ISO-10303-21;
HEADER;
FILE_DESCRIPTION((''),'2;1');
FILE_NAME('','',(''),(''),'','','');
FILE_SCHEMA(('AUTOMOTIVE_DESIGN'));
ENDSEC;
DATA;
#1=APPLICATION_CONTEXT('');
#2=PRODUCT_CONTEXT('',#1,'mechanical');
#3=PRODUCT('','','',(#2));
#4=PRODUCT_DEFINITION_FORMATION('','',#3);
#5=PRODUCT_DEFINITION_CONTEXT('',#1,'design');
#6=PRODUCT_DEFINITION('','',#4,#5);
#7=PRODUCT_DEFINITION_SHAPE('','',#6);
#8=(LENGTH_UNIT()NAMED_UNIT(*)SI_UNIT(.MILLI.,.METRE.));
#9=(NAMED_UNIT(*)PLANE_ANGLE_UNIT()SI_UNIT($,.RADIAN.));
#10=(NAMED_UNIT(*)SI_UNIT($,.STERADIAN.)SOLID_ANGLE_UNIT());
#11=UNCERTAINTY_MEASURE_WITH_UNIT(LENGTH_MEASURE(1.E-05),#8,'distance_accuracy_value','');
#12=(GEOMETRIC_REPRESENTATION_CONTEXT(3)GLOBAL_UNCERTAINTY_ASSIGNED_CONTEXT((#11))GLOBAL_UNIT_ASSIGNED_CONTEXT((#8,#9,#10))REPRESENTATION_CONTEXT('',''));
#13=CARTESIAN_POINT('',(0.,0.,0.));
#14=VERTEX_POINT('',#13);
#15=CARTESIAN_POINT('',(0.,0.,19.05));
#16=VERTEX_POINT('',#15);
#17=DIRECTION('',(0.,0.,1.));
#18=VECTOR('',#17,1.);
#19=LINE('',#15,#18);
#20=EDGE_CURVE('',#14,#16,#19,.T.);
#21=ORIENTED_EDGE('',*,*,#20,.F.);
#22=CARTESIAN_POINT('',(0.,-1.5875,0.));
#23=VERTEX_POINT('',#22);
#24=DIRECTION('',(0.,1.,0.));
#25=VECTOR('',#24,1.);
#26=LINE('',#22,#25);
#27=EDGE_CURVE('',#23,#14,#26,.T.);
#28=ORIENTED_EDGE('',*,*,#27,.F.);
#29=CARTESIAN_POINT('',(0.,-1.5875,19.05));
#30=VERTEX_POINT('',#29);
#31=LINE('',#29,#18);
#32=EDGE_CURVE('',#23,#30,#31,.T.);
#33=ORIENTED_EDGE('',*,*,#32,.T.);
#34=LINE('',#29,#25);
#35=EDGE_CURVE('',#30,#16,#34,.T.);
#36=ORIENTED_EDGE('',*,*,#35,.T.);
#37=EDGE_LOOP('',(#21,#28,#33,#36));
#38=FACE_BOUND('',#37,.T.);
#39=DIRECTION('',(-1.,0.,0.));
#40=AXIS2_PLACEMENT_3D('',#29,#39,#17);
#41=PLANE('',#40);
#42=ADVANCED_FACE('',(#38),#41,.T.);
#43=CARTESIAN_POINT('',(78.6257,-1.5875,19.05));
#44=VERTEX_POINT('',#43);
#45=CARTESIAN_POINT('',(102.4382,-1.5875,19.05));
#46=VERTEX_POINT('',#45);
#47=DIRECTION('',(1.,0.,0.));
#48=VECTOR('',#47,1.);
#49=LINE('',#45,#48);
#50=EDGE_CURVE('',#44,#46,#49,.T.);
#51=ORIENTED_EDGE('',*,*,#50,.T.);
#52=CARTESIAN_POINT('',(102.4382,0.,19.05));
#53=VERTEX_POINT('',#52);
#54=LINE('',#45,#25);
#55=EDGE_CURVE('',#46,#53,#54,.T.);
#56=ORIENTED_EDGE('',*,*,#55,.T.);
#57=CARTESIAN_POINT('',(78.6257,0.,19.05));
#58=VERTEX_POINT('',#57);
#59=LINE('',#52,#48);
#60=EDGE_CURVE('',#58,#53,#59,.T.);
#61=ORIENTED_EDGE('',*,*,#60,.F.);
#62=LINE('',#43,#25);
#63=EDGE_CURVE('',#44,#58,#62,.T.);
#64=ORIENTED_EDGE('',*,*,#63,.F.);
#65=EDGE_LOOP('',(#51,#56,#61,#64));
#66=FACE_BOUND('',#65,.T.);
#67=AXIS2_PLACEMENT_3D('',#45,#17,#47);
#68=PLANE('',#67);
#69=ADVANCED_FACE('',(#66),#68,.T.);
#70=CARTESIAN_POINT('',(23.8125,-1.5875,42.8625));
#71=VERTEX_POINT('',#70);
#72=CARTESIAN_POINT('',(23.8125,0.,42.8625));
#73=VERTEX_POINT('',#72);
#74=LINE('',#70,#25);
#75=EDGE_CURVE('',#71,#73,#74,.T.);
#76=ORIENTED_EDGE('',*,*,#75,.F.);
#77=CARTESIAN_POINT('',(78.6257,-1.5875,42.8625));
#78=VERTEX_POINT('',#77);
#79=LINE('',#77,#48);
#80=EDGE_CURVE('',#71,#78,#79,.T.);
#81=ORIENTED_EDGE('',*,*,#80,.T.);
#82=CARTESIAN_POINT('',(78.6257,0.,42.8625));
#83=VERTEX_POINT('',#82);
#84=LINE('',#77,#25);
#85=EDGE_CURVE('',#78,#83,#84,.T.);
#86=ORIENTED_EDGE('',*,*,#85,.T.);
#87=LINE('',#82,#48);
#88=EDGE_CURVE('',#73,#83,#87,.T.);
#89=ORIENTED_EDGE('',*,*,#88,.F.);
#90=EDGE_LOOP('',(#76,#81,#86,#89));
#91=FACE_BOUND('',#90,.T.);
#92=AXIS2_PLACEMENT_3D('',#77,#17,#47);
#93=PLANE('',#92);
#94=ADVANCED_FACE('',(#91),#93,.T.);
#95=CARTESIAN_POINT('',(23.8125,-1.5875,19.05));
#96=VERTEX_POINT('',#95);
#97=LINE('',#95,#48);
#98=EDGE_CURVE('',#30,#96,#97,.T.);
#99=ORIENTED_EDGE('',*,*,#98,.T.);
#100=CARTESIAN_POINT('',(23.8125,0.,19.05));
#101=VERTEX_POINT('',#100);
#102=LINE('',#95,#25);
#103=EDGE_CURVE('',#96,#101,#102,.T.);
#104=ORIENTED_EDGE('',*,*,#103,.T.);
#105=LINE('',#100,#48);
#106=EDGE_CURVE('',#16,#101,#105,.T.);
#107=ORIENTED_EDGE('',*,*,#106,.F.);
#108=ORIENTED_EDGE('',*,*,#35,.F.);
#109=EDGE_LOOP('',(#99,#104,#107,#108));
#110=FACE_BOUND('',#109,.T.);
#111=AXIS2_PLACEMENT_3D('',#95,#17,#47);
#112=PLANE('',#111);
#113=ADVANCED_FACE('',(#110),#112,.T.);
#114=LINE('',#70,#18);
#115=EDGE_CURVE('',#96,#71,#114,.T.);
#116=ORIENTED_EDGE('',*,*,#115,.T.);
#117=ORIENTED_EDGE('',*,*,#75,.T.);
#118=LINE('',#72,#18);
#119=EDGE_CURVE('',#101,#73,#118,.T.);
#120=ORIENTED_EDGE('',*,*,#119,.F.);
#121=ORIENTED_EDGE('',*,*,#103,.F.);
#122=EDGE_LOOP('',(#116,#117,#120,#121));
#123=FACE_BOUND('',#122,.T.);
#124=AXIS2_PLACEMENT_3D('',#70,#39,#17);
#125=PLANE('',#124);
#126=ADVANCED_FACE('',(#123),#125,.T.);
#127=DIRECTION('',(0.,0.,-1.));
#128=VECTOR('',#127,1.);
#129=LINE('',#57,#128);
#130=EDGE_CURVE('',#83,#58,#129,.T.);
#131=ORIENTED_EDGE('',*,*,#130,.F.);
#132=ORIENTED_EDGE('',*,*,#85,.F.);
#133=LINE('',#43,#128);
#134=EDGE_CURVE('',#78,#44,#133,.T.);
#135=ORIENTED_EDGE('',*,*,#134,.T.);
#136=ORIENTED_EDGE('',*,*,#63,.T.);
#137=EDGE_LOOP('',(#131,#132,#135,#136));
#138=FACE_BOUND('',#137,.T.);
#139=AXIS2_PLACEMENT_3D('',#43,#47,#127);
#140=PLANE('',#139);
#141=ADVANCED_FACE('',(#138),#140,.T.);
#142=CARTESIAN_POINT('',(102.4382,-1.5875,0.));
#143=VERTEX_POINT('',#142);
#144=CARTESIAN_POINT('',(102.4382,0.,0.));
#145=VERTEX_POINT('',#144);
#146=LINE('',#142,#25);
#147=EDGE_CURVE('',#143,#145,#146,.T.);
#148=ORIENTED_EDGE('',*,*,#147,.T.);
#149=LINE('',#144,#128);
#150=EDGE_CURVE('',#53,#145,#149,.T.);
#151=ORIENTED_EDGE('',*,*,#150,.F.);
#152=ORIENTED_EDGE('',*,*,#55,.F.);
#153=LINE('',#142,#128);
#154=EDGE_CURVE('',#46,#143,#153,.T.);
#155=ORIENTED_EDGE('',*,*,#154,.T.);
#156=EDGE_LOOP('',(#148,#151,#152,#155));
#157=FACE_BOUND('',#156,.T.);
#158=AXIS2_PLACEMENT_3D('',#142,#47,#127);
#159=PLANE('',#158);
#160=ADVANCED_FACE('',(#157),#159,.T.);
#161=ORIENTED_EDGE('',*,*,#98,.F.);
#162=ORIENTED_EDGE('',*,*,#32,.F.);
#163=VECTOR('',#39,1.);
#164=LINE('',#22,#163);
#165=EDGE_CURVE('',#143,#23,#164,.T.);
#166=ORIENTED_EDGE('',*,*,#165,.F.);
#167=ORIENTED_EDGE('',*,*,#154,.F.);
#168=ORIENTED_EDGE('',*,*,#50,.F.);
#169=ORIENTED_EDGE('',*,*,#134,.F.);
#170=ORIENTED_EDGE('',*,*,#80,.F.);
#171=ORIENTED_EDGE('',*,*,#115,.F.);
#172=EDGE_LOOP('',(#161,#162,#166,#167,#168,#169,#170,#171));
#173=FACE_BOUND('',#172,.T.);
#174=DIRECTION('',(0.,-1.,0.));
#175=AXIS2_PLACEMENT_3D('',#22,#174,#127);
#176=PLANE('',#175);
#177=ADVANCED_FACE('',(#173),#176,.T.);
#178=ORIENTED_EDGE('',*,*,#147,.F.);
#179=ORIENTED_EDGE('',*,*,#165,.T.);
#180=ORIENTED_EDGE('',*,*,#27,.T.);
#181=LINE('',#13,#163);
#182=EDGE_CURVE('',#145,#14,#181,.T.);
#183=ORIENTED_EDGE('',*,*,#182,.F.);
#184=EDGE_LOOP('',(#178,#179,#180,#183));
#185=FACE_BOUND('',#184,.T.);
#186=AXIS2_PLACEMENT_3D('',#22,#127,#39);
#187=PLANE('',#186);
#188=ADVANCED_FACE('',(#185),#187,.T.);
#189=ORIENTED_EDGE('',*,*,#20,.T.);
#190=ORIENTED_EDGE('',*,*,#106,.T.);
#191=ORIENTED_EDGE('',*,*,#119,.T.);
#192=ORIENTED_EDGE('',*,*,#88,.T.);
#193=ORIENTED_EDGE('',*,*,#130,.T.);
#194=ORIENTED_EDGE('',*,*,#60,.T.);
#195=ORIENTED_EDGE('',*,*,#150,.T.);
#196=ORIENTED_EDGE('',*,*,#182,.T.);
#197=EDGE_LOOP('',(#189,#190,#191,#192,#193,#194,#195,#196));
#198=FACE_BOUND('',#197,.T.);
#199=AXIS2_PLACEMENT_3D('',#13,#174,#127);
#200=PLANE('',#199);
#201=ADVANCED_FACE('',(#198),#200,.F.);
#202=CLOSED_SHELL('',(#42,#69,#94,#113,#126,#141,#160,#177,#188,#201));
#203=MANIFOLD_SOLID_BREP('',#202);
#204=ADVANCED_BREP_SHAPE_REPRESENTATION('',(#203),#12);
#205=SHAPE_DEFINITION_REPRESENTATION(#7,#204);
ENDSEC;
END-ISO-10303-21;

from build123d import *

# Parameters (mm, degrees)
BASE_FLANGE2_DEPTH = 1.5875


# Sheet-metal steps are written as plain solids
with BuildPart() as part:
    # Sketch1 → Base-Flange2 (new body)
    with BuildSketch(Plane(origin=(0, 0, 0), x_dir=(1, 0, 0), z_dir=(0, 1, 0))):
        Polygon((0, 0), (102.4382, 0), (102.4382, -19.05), (78.6257, -19.05), (78.6257, -42.8625), (23.8125, -42.8625), (23.8125, -19.05), (0, -19.05), align=None)
    extrude(amount=-BASE_FLANGE2_DEPTH)


solid = part.part
